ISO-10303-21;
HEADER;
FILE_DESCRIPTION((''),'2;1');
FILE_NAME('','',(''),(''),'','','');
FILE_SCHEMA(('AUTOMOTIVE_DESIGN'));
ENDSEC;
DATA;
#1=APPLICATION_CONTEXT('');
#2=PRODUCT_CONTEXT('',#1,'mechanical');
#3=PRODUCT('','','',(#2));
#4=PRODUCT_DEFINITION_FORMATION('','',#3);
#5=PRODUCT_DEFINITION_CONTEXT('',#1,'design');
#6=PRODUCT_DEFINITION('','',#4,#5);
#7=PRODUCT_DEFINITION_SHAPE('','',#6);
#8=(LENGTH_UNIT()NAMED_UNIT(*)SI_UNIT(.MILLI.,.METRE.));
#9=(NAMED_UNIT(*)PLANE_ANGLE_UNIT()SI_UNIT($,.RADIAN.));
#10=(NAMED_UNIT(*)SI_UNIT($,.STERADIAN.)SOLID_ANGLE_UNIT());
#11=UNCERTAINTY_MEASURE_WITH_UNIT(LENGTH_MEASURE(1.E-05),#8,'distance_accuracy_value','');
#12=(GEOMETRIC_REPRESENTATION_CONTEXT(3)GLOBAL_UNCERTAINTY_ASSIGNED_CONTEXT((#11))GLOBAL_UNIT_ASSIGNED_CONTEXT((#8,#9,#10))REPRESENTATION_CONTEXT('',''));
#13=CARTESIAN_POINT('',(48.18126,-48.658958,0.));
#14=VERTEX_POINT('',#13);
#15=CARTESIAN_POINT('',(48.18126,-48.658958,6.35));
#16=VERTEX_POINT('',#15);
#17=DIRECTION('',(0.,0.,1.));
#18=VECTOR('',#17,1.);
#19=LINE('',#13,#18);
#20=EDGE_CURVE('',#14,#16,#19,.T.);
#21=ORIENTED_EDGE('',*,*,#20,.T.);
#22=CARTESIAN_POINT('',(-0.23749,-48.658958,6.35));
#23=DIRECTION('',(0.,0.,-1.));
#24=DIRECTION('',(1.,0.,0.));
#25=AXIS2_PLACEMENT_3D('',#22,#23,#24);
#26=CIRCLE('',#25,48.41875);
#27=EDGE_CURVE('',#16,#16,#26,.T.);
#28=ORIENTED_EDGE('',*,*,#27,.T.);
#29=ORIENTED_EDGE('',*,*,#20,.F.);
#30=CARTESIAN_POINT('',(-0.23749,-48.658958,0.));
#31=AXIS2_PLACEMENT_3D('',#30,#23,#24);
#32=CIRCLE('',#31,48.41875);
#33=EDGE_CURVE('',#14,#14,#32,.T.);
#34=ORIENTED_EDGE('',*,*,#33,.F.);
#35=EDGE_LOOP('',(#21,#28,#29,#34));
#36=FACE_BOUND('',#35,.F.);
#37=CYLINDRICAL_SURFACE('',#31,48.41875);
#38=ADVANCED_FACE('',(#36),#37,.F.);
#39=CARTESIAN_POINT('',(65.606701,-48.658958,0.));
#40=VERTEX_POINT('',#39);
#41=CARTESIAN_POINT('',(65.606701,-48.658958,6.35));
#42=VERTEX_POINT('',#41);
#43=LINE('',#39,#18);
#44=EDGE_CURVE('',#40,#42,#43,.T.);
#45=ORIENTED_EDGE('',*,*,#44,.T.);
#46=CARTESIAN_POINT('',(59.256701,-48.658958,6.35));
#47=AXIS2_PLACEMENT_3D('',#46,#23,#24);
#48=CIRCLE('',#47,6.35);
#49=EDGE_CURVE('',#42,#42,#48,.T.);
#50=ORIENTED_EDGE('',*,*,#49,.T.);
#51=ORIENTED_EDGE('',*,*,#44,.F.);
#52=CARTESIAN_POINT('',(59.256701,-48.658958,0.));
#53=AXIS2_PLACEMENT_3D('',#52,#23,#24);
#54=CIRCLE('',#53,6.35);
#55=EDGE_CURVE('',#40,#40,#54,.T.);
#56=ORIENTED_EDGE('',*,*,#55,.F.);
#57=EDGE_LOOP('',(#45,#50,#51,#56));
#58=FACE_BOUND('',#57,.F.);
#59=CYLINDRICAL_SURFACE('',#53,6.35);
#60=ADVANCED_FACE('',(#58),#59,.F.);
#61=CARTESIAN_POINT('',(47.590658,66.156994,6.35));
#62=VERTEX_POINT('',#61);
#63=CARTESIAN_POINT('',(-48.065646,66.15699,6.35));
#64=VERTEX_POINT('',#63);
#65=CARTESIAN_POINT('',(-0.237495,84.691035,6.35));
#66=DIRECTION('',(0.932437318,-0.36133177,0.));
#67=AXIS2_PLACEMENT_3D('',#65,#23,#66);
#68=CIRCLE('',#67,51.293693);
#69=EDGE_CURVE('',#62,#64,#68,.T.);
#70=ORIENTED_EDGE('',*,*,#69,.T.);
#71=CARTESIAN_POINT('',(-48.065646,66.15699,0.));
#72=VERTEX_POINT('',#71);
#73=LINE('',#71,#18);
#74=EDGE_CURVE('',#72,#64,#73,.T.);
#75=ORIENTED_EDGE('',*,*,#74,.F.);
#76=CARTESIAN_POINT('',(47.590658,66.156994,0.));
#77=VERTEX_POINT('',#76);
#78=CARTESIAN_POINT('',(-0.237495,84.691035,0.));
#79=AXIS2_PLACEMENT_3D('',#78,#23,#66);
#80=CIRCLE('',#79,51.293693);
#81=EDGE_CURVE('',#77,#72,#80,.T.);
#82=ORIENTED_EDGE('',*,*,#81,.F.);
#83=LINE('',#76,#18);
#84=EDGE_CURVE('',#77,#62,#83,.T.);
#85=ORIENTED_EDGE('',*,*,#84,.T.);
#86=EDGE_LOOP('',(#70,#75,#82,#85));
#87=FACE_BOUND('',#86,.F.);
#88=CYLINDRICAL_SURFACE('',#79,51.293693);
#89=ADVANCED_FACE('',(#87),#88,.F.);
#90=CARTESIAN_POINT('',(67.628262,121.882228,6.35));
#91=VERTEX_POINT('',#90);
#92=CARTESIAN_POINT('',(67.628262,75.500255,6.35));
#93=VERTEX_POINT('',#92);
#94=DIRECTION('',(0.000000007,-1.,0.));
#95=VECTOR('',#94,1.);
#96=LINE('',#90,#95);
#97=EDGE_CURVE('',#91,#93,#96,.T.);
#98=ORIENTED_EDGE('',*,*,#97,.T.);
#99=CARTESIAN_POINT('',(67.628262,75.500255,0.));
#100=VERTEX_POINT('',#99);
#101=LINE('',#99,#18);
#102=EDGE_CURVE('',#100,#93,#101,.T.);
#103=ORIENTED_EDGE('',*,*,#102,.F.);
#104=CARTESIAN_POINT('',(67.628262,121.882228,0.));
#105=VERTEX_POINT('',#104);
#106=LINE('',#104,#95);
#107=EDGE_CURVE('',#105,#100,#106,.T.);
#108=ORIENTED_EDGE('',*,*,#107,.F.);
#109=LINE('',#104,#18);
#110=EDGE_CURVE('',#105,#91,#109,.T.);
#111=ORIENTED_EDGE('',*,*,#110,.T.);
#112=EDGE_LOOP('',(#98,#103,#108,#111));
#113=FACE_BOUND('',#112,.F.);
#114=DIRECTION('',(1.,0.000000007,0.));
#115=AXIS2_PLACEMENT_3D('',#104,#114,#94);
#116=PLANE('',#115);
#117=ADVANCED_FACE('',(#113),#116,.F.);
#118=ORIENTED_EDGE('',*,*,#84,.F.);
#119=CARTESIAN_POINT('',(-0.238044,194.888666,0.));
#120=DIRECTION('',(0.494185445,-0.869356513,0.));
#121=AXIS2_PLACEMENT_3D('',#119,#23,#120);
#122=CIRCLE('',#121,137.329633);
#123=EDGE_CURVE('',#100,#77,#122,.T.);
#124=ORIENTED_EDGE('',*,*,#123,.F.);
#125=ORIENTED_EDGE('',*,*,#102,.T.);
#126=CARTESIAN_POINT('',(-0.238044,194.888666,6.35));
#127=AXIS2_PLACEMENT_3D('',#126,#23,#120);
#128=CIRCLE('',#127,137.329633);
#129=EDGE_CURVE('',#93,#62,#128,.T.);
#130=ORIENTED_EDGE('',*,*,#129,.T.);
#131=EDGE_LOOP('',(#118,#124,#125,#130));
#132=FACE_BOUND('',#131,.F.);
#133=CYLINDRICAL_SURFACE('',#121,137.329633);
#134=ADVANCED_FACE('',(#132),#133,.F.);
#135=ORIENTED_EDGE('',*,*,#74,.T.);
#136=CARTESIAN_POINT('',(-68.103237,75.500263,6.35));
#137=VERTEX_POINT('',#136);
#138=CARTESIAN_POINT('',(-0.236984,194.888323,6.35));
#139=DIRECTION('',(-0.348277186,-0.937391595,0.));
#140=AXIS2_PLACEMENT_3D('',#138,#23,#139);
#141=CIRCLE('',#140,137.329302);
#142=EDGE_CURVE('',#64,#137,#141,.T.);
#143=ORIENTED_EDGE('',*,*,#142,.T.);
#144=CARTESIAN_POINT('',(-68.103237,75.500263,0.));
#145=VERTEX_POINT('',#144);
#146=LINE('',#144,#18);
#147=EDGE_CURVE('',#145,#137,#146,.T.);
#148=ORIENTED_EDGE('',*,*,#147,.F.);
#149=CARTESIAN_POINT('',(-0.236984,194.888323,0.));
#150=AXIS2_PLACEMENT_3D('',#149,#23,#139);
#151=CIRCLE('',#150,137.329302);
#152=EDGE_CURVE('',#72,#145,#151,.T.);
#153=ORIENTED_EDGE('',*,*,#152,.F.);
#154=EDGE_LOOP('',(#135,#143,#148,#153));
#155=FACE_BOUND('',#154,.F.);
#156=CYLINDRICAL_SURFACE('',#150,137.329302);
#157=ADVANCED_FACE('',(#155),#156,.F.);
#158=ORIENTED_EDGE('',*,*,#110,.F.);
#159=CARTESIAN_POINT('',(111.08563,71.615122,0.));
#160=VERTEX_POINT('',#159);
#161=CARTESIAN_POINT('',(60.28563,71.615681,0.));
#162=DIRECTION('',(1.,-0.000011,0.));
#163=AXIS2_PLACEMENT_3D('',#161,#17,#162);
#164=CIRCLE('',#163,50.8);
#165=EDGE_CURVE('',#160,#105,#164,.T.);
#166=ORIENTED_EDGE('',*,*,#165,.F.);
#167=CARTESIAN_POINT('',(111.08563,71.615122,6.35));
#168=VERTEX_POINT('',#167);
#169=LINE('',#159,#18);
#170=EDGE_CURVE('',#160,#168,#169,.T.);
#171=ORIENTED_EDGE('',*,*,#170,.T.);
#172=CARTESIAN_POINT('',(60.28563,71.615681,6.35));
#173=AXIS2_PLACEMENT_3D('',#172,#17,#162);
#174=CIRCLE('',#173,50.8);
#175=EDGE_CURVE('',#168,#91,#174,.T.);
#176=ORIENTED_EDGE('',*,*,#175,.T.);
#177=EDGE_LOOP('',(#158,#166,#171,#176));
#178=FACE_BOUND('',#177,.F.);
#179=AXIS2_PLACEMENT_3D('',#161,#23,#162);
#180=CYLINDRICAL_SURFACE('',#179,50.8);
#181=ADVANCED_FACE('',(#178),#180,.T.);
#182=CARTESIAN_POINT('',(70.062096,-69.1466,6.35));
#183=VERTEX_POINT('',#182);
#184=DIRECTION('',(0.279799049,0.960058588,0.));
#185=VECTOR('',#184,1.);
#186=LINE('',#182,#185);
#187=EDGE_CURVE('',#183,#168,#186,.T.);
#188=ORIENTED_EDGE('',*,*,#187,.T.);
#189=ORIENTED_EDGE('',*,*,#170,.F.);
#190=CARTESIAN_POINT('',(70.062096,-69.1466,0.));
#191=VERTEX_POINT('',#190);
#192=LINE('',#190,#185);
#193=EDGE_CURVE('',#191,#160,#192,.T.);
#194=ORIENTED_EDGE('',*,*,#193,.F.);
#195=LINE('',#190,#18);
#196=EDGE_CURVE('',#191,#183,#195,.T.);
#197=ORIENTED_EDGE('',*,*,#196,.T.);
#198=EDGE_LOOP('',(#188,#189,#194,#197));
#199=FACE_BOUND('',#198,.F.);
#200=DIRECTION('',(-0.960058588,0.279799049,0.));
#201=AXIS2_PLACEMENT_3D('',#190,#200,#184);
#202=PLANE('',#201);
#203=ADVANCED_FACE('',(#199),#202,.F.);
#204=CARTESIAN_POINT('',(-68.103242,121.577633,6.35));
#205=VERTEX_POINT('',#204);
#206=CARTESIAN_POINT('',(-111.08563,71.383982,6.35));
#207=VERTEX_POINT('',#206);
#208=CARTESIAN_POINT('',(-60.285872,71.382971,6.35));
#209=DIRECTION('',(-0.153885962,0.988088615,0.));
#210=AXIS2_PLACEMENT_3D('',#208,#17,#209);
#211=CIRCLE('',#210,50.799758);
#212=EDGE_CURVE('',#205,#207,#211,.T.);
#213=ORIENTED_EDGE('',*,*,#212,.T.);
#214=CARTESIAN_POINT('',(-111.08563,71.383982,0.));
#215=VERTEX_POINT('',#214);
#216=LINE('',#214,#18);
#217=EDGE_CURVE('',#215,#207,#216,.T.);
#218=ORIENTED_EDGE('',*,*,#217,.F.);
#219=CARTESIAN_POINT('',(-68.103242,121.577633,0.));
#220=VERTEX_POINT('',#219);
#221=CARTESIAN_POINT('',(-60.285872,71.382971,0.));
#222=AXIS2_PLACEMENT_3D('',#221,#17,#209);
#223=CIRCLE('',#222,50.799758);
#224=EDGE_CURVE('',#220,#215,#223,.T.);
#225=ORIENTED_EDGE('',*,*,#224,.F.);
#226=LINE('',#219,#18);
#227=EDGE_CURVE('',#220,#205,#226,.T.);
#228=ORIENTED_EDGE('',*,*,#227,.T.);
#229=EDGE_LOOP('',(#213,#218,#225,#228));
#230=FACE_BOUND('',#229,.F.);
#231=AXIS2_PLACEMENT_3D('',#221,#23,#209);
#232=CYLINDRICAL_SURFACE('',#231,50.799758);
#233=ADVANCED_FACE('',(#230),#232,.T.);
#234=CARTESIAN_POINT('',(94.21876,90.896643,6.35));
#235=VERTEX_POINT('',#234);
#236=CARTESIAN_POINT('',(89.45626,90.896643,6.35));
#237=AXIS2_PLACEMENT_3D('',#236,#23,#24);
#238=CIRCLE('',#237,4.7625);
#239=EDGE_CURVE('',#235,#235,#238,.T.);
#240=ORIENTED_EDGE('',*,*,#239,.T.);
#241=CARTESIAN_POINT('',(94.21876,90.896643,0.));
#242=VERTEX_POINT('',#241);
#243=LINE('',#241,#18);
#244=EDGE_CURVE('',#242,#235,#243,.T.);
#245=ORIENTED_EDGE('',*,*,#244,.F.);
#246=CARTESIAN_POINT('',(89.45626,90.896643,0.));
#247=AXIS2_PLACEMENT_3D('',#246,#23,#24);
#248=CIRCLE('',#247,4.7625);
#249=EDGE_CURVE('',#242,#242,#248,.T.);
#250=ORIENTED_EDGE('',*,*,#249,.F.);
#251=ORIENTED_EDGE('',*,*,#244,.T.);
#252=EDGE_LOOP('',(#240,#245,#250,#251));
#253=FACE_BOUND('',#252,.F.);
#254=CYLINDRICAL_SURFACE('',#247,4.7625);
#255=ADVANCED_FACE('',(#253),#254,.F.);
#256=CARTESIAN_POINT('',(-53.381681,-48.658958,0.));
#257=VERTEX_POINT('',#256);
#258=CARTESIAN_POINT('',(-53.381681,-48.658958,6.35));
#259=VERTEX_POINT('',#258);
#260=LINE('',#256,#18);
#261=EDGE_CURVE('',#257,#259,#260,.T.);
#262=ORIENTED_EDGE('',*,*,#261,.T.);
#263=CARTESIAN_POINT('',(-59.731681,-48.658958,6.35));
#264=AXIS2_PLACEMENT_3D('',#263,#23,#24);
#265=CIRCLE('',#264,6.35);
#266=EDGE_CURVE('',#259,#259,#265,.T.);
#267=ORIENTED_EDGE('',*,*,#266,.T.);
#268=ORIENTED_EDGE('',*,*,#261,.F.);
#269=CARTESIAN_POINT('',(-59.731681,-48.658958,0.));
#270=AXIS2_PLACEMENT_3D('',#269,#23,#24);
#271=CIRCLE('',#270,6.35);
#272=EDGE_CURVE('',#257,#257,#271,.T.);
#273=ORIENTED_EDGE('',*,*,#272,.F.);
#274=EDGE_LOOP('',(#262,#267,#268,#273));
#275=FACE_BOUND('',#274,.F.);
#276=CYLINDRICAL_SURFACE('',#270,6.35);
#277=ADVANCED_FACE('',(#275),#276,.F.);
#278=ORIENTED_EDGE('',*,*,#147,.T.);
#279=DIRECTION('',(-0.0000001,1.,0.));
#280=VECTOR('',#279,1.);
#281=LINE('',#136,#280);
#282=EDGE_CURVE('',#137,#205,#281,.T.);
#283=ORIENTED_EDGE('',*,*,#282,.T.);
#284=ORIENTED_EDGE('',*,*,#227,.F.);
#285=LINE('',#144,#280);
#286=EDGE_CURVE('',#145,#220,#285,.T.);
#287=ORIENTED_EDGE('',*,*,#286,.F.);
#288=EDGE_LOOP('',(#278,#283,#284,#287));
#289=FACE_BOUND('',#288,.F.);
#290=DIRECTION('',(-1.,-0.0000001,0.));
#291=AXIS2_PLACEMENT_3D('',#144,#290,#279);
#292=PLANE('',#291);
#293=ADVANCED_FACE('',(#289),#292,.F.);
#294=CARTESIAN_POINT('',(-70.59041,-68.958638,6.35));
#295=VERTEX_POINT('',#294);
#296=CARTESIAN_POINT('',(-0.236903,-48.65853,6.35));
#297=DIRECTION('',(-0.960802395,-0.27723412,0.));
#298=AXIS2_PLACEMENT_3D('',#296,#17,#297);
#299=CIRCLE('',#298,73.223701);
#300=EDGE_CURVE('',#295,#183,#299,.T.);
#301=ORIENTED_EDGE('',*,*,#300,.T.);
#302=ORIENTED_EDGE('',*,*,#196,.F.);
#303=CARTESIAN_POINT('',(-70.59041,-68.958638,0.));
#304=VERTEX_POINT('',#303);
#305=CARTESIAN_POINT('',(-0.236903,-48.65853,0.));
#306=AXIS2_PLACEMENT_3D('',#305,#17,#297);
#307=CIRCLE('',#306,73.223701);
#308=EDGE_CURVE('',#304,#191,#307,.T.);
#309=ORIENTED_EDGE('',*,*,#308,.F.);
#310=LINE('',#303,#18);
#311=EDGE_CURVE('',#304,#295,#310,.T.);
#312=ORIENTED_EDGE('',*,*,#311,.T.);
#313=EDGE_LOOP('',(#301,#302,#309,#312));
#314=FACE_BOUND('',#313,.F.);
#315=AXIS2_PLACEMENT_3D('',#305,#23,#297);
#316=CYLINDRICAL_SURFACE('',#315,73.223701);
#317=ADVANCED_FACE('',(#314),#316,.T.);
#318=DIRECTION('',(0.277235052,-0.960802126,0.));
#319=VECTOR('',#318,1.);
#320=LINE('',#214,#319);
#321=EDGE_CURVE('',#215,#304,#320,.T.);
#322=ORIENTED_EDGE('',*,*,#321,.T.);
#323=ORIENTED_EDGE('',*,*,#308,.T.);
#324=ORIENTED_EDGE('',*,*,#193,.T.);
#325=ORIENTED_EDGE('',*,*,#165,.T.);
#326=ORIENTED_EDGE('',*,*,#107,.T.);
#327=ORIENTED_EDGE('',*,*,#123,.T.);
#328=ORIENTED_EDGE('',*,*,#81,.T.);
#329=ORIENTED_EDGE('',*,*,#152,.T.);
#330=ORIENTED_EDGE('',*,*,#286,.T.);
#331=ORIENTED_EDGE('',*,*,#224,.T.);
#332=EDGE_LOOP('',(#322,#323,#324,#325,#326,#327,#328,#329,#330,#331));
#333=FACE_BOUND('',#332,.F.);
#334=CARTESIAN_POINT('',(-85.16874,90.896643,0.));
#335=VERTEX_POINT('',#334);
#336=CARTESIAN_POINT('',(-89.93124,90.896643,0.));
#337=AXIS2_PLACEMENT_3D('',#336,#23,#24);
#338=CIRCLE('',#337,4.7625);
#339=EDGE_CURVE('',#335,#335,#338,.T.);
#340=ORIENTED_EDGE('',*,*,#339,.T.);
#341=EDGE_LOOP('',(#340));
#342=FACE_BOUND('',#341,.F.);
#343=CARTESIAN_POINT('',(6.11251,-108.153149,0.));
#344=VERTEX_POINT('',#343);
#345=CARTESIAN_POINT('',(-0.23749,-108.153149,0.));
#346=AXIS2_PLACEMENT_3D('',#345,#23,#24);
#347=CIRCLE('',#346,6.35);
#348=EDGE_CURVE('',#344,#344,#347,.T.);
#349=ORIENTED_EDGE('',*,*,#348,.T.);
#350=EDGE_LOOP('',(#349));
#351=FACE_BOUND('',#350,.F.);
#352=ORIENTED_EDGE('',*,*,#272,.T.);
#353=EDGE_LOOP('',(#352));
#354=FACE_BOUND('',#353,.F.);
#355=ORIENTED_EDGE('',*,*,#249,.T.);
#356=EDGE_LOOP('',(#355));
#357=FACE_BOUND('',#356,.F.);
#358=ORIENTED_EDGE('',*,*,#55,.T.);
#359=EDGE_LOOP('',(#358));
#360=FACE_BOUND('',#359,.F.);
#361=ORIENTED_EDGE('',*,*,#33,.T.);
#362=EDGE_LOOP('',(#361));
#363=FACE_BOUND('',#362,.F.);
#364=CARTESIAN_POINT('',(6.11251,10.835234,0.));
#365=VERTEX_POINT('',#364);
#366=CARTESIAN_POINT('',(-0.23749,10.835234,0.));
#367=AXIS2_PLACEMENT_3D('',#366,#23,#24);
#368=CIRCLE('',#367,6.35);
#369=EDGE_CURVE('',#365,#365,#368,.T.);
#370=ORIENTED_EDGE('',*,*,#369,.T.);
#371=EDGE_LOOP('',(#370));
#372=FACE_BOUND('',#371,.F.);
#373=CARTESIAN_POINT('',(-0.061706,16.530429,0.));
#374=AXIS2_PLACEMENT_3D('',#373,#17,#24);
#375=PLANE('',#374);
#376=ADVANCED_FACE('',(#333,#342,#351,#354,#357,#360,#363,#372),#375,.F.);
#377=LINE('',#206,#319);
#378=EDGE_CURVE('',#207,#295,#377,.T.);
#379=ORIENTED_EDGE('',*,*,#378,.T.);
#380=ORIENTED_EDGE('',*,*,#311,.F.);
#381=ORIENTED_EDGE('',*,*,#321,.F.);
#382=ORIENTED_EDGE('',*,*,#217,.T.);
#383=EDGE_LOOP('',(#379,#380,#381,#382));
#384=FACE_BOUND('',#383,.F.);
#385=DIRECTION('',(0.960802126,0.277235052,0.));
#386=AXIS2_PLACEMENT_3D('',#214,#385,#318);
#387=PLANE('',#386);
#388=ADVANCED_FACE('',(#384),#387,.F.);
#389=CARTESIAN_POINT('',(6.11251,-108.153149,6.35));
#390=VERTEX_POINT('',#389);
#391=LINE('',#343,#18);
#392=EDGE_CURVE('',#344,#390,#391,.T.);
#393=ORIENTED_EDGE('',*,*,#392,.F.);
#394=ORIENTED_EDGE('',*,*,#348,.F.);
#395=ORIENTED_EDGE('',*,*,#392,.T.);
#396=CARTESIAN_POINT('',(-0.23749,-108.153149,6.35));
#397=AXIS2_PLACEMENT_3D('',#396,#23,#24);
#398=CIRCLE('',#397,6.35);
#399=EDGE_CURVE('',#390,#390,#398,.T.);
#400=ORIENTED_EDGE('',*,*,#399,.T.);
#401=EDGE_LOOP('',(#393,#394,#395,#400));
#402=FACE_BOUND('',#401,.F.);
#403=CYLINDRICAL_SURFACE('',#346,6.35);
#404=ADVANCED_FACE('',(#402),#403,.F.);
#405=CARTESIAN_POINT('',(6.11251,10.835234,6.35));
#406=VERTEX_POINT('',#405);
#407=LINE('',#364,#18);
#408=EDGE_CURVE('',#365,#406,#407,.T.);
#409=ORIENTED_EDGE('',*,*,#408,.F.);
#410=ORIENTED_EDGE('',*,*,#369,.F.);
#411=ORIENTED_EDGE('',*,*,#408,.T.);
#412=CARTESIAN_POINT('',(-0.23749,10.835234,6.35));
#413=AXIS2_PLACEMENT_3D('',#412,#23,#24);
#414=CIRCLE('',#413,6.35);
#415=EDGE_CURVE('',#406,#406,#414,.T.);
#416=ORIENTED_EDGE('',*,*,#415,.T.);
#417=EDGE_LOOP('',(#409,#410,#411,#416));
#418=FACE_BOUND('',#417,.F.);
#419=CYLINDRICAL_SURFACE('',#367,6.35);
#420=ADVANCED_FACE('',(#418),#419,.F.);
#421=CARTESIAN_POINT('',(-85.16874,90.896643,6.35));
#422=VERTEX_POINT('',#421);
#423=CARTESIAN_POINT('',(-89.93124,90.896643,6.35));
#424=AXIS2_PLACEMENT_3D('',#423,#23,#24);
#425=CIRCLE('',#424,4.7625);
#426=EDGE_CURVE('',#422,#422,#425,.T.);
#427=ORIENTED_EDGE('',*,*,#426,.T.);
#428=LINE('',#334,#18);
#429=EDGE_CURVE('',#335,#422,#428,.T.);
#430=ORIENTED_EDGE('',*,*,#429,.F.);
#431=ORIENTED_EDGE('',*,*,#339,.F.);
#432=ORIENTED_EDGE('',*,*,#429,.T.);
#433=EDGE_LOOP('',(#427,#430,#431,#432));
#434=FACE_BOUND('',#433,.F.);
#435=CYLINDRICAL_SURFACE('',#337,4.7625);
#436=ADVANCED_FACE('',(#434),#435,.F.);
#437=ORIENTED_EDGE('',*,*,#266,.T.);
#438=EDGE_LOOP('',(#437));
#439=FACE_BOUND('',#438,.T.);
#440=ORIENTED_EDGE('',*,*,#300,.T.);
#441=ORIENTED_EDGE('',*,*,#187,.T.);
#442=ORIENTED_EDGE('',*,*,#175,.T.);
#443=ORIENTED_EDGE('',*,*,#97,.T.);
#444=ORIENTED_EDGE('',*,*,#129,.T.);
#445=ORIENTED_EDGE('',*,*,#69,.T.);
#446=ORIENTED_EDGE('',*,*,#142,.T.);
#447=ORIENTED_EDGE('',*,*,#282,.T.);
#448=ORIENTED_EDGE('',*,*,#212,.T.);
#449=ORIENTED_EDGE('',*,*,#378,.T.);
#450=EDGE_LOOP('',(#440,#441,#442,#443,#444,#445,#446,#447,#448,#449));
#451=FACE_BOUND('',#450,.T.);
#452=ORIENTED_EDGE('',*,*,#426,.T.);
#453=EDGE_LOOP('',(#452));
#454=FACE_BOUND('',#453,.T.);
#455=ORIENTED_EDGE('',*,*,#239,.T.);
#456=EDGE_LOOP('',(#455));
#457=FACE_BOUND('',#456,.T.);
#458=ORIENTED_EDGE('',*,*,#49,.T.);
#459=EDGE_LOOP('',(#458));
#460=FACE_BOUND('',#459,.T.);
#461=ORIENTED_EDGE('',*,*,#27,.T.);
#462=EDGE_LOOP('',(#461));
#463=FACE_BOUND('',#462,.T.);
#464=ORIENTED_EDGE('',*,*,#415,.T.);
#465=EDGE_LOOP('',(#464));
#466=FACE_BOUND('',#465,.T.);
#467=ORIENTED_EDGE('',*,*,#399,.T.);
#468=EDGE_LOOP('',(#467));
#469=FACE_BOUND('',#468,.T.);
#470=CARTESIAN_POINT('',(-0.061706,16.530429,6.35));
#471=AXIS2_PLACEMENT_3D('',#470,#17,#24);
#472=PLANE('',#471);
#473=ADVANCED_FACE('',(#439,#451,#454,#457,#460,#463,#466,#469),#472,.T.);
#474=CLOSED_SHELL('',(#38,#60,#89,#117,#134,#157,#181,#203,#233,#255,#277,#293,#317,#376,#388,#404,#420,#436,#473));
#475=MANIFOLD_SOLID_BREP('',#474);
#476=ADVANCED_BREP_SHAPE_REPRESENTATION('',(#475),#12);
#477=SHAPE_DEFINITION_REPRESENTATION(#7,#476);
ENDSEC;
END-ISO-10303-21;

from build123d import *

# Parameters (mm, degrees)
F1_DEPTH = 6.35


# Not quite as in the source:
# - ends of sketch curves that miss each other by under 0.0002 mm in the source are joined


with BuildPart() as f1:
    # F0 (on Top) → F1 (new body)
    with BuildSketch(Plane.XY):
        with BuildLine():
            Line((-111.08563, 71.3839822), (-70.59041, -68.9586378))
            ThreePointArc((-70.59041, -68.9586378), (-0.3347578994, -121.8821648179), (70.0620962947, -69.1465996345))
            Line((70.0620962947, -69.1465996345), (111.08563, 71.6151222))
            ThreePointArc((111.08563, 71.6151222), (98.7152655637, 104.8392134799), (67.6282616967, 121.882228124))
            Line((67.6282616967, 121.882228124), (67.628262, 75.5002554))
            ThreePointArc((67.628262, 75.5002554), (57.7977885358, 70.4247346397), (47.5906584666, 66.156994374))
            ThreePointArc((47.5906584666, 66.156994374), (-0.23749, 33.3973424), (-48.0656463013, 66.1569896482))
            ThreePointArc((-48.0656463013, 66.1569896482), (-58.2727685358, 70.4247346397), (-68.1032374015, 75.5002634895))
            Line((-68.1032374015, 75.5002634895), (-68.103242, 121.5776334))
            ThreePointArc((-68.103242, 121.5776334), (-98.8713942195, 104.4249578962), (-111.08563, 71.3839822))
        make_face()
        with BuildLine():
            ThreePointArc((-6.58749, -108.1531492), (-0.23749, -101.8031492), (6.11251, -108.1531492))
            ThreePointArc((6.11251, -108.1531492), (-0.23749, -114.5031492), (-6.58749, -108.1531492))
        make_face(mode=Mode.SUBTRACT)
        with BuildLine():
            ThreePointArc((-66.0816814, -48.6589578), (-59.7316814, -42.3089578), (-53.3816814, -48.6589578))
            ThreePointArc((-53.3816814, -48.6589578), (-59.7316814, -55.0089578), (-66.0816814, -48.6589578))
        make_face(mode=Mode.SUBTRACT)
        with BuildLine():
            ThreePointArc((-48.65624, -48.6589578), (-0.23749, -0.2402078), (48.18126, -48.6589578))
            ThreePointArc((48.18126, -48.6589578), (-0.23749, -97.0777078), (-48.65624, -48.6589578))
        make_face(mode=Mode.SUBTRACT)
        with BuildLine():
            ThreePointArc((52.9067014, -48.6589578), (59.2567014, -42.3089578), (65.6067014, -48.6589578))
            ThreePointArc((65.6067014, -48.6589578), (59.2567014, -55.0089578), (52.9067014, -48.6589578))
        make_face(mode=Mode.SUBTRACT)
        with BuildLine():
            ThreePointArc((-6.58749, 10.8352336), (-0.23749, 17.1852336), (6.11251, 10.8352336))
            ThreePointArc((6.11251, 10.8352336), (-0.23749, 4.4852336), (-6.58749, 10.8352336))
        make_face(mode=Mode.SUBTRACT)
        with BuildLine():
            ThreePointArc((-94.69374, 90.8966432), (-89.93124, 95.6591432), (-85.16874, 90.8966432))
            ThreePointArc((-85.16874, 90.8966432), (-89.93124, 86.1341432), (-94.69374, 90.8966432))
        make_face(mode=Mode.SUBTRACT)
        with BuildLine():
            ThreePointArc((84.69376, 90.8966432), (89.45626, 95.6591432), (94.21876, 90.8966432))
            ThreePointArc((94.21876, 90.8966432), (89.45626, 86.1341432), (84.69376, 90.8966432))
        make_face(mode=Mode.SUBTRACT)
    extrude(amount=F1_DEPTH)


solid = f1.part
